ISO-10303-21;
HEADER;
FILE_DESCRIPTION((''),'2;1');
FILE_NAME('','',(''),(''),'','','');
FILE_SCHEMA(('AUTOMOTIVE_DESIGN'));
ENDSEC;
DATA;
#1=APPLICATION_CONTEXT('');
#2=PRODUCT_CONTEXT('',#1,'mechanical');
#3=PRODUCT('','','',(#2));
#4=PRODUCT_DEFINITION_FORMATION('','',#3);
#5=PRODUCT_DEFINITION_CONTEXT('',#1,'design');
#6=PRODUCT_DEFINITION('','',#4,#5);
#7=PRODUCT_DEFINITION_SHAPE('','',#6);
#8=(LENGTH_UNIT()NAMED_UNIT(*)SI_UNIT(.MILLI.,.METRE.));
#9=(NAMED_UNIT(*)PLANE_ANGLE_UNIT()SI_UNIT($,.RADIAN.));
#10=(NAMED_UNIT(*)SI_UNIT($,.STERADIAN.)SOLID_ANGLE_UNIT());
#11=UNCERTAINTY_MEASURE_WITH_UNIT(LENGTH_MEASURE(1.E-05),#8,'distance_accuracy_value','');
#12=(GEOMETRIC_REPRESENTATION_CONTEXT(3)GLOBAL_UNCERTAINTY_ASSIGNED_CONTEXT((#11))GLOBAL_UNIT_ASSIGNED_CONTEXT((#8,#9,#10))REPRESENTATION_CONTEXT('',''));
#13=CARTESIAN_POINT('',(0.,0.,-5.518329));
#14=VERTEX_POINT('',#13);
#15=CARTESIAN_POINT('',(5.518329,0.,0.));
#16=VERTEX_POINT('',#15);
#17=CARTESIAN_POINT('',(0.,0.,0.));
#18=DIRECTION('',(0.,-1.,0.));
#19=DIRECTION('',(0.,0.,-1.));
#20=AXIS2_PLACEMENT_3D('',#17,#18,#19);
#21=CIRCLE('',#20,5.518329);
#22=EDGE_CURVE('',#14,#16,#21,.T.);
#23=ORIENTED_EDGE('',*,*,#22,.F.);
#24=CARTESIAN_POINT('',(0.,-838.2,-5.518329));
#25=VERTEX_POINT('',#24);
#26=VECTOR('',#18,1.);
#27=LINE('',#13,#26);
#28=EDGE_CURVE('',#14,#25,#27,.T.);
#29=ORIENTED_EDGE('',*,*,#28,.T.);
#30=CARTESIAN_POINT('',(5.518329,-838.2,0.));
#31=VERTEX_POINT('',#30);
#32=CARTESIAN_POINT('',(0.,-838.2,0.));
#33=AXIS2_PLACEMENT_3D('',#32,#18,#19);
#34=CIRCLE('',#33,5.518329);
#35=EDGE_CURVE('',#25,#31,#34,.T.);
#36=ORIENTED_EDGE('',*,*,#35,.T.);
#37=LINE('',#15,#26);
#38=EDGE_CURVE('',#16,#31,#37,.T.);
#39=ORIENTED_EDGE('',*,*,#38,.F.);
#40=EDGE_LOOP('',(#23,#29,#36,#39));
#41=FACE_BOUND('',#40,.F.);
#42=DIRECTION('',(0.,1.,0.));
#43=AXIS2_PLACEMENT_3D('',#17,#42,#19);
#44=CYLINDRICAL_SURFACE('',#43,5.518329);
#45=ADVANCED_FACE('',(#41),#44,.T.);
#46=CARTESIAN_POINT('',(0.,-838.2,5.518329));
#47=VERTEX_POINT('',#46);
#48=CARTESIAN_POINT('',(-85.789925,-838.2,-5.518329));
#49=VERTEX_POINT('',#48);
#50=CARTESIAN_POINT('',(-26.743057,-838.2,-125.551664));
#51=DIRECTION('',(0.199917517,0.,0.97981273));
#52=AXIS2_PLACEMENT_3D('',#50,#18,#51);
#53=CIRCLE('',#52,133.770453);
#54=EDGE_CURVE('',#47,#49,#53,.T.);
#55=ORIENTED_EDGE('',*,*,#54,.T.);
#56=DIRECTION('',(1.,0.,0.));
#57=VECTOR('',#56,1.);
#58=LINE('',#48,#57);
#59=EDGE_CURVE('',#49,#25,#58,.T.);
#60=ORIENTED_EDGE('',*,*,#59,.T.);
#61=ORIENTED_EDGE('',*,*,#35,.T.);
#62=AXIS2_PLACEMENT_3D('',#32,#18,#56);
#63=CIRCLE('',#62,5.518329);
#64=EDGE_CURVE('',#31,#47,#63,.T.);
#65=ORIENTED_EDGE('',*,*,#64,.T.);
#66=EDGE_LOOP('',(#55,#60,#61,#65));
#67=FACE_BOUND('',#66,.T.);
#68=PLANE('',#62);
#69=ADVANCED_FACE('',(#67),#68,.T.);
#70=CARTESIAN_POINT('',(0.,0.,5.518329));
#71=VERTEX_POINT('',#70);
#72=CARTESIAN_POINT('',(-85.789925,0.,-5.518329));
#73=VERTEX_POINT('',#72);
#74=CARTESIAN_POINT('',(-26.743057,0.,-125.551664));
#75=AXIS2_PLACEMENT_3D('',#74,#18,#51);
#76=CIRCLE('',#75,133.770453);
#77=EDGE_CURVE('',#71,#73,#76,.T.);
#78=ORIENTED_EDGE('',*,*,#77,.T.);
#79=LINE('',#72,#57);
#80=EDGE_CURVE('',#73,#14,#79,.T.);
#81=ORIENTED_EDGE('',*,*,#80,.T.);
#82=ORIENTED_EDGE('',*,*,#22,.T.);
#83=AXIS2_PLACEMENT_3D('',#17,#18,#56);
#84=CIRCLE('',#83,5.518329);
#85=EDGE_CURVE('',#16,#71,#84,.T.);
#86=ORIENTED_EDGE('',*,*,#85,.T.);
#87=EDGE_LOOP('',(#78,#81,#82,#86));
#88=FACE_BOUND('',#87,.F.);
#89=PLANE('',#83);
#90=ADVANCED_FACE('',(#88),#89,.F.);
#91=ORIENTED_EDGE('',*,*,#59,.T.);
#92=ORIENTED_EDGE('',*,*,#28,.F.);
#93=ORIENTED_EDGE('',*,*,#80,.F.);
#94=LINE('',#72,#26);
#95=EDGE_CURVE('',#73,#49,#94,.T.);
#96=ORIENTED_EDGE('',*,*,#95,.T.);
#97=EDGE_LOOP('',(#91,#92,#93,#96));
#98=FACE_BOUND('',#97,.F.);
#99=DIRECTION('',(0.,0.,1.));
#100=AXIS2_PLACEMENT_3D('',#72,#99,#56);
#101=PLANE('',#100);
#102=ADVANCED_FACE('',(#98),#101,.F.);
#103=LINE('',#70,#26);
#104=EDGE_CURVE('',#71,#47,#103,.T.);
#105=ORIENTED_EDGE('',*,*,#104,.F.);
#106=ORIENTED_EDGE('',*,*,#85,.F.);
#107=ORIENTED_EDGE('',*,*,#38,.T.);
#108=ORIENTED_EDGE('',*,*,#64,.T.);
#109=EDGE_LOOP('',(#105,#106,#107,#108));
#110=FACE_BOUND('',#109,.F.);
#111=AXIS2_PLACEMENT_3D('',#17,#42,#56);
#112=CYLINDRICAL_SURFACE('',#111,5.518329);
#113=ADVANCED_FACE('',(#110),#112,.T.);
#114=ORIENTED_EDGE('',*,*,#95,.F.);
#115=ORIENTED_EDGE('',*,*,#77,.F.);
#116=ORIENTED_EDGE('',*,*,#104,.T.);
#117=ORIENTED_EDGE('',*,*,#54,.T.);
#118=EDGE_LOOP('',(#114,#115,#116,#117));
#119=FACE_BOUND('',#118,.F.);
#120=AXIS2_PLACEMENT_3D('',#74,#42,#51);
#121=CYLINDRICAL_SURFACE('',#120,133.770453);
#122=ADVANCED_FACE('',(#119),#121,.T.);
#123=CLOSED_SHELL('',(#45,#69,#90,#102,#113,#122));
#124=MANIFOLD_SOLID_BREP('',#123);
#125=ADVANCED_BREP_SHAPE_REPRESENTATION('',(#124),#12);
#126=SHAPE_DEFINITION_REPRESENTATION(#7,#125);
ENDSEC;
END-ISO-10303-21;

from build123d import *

# Parameters (mm, degrees)
F1_DEPTH = 838.2


with BuildPart() as f1:
    # F0 (on Front) → F1 (new body)
    with BuildSketch(Plane.XZ):
        with BuildLine():
            ThreePointArc((0, -5.5183288966), (3.9020477836, -3.9020477836), (5.5183288966, 0))
            ThreePointArc((5.5183288966, 0), (3.9020477836, 3.9020477836), (0, 5.5183288966))
            ThreePointArc((0, 5.5183288966), (-3.9020477836, 3.9020477836), (-5.5183288966, 0))
            ThreePointArc((-5.5183288966, 0), (-3.9020477836, -3.9020477836), (0, -5.5183288966))
        make_face()
        with BuildLine():
            ThreePointArc((-5.5183288966, 0), (-3.9020477836, 3.9020477836), (0, 5.5183288966))
            ThreePointArc((0, 5.5183288966), (-43.8116245236, 7.1253804433), (-85.7899245391, -5.5183288966))
            Line((-85.7899245391, -5.5183288966), (0, -5.5183288966))
            ThreePointArc((0, -5.5183288966), (-3.9020477836, -3.9020477836), (-5.5183288966, 0))
        make_face()
    extrude(amount=F1_DEPTH)


solid = f1.part
